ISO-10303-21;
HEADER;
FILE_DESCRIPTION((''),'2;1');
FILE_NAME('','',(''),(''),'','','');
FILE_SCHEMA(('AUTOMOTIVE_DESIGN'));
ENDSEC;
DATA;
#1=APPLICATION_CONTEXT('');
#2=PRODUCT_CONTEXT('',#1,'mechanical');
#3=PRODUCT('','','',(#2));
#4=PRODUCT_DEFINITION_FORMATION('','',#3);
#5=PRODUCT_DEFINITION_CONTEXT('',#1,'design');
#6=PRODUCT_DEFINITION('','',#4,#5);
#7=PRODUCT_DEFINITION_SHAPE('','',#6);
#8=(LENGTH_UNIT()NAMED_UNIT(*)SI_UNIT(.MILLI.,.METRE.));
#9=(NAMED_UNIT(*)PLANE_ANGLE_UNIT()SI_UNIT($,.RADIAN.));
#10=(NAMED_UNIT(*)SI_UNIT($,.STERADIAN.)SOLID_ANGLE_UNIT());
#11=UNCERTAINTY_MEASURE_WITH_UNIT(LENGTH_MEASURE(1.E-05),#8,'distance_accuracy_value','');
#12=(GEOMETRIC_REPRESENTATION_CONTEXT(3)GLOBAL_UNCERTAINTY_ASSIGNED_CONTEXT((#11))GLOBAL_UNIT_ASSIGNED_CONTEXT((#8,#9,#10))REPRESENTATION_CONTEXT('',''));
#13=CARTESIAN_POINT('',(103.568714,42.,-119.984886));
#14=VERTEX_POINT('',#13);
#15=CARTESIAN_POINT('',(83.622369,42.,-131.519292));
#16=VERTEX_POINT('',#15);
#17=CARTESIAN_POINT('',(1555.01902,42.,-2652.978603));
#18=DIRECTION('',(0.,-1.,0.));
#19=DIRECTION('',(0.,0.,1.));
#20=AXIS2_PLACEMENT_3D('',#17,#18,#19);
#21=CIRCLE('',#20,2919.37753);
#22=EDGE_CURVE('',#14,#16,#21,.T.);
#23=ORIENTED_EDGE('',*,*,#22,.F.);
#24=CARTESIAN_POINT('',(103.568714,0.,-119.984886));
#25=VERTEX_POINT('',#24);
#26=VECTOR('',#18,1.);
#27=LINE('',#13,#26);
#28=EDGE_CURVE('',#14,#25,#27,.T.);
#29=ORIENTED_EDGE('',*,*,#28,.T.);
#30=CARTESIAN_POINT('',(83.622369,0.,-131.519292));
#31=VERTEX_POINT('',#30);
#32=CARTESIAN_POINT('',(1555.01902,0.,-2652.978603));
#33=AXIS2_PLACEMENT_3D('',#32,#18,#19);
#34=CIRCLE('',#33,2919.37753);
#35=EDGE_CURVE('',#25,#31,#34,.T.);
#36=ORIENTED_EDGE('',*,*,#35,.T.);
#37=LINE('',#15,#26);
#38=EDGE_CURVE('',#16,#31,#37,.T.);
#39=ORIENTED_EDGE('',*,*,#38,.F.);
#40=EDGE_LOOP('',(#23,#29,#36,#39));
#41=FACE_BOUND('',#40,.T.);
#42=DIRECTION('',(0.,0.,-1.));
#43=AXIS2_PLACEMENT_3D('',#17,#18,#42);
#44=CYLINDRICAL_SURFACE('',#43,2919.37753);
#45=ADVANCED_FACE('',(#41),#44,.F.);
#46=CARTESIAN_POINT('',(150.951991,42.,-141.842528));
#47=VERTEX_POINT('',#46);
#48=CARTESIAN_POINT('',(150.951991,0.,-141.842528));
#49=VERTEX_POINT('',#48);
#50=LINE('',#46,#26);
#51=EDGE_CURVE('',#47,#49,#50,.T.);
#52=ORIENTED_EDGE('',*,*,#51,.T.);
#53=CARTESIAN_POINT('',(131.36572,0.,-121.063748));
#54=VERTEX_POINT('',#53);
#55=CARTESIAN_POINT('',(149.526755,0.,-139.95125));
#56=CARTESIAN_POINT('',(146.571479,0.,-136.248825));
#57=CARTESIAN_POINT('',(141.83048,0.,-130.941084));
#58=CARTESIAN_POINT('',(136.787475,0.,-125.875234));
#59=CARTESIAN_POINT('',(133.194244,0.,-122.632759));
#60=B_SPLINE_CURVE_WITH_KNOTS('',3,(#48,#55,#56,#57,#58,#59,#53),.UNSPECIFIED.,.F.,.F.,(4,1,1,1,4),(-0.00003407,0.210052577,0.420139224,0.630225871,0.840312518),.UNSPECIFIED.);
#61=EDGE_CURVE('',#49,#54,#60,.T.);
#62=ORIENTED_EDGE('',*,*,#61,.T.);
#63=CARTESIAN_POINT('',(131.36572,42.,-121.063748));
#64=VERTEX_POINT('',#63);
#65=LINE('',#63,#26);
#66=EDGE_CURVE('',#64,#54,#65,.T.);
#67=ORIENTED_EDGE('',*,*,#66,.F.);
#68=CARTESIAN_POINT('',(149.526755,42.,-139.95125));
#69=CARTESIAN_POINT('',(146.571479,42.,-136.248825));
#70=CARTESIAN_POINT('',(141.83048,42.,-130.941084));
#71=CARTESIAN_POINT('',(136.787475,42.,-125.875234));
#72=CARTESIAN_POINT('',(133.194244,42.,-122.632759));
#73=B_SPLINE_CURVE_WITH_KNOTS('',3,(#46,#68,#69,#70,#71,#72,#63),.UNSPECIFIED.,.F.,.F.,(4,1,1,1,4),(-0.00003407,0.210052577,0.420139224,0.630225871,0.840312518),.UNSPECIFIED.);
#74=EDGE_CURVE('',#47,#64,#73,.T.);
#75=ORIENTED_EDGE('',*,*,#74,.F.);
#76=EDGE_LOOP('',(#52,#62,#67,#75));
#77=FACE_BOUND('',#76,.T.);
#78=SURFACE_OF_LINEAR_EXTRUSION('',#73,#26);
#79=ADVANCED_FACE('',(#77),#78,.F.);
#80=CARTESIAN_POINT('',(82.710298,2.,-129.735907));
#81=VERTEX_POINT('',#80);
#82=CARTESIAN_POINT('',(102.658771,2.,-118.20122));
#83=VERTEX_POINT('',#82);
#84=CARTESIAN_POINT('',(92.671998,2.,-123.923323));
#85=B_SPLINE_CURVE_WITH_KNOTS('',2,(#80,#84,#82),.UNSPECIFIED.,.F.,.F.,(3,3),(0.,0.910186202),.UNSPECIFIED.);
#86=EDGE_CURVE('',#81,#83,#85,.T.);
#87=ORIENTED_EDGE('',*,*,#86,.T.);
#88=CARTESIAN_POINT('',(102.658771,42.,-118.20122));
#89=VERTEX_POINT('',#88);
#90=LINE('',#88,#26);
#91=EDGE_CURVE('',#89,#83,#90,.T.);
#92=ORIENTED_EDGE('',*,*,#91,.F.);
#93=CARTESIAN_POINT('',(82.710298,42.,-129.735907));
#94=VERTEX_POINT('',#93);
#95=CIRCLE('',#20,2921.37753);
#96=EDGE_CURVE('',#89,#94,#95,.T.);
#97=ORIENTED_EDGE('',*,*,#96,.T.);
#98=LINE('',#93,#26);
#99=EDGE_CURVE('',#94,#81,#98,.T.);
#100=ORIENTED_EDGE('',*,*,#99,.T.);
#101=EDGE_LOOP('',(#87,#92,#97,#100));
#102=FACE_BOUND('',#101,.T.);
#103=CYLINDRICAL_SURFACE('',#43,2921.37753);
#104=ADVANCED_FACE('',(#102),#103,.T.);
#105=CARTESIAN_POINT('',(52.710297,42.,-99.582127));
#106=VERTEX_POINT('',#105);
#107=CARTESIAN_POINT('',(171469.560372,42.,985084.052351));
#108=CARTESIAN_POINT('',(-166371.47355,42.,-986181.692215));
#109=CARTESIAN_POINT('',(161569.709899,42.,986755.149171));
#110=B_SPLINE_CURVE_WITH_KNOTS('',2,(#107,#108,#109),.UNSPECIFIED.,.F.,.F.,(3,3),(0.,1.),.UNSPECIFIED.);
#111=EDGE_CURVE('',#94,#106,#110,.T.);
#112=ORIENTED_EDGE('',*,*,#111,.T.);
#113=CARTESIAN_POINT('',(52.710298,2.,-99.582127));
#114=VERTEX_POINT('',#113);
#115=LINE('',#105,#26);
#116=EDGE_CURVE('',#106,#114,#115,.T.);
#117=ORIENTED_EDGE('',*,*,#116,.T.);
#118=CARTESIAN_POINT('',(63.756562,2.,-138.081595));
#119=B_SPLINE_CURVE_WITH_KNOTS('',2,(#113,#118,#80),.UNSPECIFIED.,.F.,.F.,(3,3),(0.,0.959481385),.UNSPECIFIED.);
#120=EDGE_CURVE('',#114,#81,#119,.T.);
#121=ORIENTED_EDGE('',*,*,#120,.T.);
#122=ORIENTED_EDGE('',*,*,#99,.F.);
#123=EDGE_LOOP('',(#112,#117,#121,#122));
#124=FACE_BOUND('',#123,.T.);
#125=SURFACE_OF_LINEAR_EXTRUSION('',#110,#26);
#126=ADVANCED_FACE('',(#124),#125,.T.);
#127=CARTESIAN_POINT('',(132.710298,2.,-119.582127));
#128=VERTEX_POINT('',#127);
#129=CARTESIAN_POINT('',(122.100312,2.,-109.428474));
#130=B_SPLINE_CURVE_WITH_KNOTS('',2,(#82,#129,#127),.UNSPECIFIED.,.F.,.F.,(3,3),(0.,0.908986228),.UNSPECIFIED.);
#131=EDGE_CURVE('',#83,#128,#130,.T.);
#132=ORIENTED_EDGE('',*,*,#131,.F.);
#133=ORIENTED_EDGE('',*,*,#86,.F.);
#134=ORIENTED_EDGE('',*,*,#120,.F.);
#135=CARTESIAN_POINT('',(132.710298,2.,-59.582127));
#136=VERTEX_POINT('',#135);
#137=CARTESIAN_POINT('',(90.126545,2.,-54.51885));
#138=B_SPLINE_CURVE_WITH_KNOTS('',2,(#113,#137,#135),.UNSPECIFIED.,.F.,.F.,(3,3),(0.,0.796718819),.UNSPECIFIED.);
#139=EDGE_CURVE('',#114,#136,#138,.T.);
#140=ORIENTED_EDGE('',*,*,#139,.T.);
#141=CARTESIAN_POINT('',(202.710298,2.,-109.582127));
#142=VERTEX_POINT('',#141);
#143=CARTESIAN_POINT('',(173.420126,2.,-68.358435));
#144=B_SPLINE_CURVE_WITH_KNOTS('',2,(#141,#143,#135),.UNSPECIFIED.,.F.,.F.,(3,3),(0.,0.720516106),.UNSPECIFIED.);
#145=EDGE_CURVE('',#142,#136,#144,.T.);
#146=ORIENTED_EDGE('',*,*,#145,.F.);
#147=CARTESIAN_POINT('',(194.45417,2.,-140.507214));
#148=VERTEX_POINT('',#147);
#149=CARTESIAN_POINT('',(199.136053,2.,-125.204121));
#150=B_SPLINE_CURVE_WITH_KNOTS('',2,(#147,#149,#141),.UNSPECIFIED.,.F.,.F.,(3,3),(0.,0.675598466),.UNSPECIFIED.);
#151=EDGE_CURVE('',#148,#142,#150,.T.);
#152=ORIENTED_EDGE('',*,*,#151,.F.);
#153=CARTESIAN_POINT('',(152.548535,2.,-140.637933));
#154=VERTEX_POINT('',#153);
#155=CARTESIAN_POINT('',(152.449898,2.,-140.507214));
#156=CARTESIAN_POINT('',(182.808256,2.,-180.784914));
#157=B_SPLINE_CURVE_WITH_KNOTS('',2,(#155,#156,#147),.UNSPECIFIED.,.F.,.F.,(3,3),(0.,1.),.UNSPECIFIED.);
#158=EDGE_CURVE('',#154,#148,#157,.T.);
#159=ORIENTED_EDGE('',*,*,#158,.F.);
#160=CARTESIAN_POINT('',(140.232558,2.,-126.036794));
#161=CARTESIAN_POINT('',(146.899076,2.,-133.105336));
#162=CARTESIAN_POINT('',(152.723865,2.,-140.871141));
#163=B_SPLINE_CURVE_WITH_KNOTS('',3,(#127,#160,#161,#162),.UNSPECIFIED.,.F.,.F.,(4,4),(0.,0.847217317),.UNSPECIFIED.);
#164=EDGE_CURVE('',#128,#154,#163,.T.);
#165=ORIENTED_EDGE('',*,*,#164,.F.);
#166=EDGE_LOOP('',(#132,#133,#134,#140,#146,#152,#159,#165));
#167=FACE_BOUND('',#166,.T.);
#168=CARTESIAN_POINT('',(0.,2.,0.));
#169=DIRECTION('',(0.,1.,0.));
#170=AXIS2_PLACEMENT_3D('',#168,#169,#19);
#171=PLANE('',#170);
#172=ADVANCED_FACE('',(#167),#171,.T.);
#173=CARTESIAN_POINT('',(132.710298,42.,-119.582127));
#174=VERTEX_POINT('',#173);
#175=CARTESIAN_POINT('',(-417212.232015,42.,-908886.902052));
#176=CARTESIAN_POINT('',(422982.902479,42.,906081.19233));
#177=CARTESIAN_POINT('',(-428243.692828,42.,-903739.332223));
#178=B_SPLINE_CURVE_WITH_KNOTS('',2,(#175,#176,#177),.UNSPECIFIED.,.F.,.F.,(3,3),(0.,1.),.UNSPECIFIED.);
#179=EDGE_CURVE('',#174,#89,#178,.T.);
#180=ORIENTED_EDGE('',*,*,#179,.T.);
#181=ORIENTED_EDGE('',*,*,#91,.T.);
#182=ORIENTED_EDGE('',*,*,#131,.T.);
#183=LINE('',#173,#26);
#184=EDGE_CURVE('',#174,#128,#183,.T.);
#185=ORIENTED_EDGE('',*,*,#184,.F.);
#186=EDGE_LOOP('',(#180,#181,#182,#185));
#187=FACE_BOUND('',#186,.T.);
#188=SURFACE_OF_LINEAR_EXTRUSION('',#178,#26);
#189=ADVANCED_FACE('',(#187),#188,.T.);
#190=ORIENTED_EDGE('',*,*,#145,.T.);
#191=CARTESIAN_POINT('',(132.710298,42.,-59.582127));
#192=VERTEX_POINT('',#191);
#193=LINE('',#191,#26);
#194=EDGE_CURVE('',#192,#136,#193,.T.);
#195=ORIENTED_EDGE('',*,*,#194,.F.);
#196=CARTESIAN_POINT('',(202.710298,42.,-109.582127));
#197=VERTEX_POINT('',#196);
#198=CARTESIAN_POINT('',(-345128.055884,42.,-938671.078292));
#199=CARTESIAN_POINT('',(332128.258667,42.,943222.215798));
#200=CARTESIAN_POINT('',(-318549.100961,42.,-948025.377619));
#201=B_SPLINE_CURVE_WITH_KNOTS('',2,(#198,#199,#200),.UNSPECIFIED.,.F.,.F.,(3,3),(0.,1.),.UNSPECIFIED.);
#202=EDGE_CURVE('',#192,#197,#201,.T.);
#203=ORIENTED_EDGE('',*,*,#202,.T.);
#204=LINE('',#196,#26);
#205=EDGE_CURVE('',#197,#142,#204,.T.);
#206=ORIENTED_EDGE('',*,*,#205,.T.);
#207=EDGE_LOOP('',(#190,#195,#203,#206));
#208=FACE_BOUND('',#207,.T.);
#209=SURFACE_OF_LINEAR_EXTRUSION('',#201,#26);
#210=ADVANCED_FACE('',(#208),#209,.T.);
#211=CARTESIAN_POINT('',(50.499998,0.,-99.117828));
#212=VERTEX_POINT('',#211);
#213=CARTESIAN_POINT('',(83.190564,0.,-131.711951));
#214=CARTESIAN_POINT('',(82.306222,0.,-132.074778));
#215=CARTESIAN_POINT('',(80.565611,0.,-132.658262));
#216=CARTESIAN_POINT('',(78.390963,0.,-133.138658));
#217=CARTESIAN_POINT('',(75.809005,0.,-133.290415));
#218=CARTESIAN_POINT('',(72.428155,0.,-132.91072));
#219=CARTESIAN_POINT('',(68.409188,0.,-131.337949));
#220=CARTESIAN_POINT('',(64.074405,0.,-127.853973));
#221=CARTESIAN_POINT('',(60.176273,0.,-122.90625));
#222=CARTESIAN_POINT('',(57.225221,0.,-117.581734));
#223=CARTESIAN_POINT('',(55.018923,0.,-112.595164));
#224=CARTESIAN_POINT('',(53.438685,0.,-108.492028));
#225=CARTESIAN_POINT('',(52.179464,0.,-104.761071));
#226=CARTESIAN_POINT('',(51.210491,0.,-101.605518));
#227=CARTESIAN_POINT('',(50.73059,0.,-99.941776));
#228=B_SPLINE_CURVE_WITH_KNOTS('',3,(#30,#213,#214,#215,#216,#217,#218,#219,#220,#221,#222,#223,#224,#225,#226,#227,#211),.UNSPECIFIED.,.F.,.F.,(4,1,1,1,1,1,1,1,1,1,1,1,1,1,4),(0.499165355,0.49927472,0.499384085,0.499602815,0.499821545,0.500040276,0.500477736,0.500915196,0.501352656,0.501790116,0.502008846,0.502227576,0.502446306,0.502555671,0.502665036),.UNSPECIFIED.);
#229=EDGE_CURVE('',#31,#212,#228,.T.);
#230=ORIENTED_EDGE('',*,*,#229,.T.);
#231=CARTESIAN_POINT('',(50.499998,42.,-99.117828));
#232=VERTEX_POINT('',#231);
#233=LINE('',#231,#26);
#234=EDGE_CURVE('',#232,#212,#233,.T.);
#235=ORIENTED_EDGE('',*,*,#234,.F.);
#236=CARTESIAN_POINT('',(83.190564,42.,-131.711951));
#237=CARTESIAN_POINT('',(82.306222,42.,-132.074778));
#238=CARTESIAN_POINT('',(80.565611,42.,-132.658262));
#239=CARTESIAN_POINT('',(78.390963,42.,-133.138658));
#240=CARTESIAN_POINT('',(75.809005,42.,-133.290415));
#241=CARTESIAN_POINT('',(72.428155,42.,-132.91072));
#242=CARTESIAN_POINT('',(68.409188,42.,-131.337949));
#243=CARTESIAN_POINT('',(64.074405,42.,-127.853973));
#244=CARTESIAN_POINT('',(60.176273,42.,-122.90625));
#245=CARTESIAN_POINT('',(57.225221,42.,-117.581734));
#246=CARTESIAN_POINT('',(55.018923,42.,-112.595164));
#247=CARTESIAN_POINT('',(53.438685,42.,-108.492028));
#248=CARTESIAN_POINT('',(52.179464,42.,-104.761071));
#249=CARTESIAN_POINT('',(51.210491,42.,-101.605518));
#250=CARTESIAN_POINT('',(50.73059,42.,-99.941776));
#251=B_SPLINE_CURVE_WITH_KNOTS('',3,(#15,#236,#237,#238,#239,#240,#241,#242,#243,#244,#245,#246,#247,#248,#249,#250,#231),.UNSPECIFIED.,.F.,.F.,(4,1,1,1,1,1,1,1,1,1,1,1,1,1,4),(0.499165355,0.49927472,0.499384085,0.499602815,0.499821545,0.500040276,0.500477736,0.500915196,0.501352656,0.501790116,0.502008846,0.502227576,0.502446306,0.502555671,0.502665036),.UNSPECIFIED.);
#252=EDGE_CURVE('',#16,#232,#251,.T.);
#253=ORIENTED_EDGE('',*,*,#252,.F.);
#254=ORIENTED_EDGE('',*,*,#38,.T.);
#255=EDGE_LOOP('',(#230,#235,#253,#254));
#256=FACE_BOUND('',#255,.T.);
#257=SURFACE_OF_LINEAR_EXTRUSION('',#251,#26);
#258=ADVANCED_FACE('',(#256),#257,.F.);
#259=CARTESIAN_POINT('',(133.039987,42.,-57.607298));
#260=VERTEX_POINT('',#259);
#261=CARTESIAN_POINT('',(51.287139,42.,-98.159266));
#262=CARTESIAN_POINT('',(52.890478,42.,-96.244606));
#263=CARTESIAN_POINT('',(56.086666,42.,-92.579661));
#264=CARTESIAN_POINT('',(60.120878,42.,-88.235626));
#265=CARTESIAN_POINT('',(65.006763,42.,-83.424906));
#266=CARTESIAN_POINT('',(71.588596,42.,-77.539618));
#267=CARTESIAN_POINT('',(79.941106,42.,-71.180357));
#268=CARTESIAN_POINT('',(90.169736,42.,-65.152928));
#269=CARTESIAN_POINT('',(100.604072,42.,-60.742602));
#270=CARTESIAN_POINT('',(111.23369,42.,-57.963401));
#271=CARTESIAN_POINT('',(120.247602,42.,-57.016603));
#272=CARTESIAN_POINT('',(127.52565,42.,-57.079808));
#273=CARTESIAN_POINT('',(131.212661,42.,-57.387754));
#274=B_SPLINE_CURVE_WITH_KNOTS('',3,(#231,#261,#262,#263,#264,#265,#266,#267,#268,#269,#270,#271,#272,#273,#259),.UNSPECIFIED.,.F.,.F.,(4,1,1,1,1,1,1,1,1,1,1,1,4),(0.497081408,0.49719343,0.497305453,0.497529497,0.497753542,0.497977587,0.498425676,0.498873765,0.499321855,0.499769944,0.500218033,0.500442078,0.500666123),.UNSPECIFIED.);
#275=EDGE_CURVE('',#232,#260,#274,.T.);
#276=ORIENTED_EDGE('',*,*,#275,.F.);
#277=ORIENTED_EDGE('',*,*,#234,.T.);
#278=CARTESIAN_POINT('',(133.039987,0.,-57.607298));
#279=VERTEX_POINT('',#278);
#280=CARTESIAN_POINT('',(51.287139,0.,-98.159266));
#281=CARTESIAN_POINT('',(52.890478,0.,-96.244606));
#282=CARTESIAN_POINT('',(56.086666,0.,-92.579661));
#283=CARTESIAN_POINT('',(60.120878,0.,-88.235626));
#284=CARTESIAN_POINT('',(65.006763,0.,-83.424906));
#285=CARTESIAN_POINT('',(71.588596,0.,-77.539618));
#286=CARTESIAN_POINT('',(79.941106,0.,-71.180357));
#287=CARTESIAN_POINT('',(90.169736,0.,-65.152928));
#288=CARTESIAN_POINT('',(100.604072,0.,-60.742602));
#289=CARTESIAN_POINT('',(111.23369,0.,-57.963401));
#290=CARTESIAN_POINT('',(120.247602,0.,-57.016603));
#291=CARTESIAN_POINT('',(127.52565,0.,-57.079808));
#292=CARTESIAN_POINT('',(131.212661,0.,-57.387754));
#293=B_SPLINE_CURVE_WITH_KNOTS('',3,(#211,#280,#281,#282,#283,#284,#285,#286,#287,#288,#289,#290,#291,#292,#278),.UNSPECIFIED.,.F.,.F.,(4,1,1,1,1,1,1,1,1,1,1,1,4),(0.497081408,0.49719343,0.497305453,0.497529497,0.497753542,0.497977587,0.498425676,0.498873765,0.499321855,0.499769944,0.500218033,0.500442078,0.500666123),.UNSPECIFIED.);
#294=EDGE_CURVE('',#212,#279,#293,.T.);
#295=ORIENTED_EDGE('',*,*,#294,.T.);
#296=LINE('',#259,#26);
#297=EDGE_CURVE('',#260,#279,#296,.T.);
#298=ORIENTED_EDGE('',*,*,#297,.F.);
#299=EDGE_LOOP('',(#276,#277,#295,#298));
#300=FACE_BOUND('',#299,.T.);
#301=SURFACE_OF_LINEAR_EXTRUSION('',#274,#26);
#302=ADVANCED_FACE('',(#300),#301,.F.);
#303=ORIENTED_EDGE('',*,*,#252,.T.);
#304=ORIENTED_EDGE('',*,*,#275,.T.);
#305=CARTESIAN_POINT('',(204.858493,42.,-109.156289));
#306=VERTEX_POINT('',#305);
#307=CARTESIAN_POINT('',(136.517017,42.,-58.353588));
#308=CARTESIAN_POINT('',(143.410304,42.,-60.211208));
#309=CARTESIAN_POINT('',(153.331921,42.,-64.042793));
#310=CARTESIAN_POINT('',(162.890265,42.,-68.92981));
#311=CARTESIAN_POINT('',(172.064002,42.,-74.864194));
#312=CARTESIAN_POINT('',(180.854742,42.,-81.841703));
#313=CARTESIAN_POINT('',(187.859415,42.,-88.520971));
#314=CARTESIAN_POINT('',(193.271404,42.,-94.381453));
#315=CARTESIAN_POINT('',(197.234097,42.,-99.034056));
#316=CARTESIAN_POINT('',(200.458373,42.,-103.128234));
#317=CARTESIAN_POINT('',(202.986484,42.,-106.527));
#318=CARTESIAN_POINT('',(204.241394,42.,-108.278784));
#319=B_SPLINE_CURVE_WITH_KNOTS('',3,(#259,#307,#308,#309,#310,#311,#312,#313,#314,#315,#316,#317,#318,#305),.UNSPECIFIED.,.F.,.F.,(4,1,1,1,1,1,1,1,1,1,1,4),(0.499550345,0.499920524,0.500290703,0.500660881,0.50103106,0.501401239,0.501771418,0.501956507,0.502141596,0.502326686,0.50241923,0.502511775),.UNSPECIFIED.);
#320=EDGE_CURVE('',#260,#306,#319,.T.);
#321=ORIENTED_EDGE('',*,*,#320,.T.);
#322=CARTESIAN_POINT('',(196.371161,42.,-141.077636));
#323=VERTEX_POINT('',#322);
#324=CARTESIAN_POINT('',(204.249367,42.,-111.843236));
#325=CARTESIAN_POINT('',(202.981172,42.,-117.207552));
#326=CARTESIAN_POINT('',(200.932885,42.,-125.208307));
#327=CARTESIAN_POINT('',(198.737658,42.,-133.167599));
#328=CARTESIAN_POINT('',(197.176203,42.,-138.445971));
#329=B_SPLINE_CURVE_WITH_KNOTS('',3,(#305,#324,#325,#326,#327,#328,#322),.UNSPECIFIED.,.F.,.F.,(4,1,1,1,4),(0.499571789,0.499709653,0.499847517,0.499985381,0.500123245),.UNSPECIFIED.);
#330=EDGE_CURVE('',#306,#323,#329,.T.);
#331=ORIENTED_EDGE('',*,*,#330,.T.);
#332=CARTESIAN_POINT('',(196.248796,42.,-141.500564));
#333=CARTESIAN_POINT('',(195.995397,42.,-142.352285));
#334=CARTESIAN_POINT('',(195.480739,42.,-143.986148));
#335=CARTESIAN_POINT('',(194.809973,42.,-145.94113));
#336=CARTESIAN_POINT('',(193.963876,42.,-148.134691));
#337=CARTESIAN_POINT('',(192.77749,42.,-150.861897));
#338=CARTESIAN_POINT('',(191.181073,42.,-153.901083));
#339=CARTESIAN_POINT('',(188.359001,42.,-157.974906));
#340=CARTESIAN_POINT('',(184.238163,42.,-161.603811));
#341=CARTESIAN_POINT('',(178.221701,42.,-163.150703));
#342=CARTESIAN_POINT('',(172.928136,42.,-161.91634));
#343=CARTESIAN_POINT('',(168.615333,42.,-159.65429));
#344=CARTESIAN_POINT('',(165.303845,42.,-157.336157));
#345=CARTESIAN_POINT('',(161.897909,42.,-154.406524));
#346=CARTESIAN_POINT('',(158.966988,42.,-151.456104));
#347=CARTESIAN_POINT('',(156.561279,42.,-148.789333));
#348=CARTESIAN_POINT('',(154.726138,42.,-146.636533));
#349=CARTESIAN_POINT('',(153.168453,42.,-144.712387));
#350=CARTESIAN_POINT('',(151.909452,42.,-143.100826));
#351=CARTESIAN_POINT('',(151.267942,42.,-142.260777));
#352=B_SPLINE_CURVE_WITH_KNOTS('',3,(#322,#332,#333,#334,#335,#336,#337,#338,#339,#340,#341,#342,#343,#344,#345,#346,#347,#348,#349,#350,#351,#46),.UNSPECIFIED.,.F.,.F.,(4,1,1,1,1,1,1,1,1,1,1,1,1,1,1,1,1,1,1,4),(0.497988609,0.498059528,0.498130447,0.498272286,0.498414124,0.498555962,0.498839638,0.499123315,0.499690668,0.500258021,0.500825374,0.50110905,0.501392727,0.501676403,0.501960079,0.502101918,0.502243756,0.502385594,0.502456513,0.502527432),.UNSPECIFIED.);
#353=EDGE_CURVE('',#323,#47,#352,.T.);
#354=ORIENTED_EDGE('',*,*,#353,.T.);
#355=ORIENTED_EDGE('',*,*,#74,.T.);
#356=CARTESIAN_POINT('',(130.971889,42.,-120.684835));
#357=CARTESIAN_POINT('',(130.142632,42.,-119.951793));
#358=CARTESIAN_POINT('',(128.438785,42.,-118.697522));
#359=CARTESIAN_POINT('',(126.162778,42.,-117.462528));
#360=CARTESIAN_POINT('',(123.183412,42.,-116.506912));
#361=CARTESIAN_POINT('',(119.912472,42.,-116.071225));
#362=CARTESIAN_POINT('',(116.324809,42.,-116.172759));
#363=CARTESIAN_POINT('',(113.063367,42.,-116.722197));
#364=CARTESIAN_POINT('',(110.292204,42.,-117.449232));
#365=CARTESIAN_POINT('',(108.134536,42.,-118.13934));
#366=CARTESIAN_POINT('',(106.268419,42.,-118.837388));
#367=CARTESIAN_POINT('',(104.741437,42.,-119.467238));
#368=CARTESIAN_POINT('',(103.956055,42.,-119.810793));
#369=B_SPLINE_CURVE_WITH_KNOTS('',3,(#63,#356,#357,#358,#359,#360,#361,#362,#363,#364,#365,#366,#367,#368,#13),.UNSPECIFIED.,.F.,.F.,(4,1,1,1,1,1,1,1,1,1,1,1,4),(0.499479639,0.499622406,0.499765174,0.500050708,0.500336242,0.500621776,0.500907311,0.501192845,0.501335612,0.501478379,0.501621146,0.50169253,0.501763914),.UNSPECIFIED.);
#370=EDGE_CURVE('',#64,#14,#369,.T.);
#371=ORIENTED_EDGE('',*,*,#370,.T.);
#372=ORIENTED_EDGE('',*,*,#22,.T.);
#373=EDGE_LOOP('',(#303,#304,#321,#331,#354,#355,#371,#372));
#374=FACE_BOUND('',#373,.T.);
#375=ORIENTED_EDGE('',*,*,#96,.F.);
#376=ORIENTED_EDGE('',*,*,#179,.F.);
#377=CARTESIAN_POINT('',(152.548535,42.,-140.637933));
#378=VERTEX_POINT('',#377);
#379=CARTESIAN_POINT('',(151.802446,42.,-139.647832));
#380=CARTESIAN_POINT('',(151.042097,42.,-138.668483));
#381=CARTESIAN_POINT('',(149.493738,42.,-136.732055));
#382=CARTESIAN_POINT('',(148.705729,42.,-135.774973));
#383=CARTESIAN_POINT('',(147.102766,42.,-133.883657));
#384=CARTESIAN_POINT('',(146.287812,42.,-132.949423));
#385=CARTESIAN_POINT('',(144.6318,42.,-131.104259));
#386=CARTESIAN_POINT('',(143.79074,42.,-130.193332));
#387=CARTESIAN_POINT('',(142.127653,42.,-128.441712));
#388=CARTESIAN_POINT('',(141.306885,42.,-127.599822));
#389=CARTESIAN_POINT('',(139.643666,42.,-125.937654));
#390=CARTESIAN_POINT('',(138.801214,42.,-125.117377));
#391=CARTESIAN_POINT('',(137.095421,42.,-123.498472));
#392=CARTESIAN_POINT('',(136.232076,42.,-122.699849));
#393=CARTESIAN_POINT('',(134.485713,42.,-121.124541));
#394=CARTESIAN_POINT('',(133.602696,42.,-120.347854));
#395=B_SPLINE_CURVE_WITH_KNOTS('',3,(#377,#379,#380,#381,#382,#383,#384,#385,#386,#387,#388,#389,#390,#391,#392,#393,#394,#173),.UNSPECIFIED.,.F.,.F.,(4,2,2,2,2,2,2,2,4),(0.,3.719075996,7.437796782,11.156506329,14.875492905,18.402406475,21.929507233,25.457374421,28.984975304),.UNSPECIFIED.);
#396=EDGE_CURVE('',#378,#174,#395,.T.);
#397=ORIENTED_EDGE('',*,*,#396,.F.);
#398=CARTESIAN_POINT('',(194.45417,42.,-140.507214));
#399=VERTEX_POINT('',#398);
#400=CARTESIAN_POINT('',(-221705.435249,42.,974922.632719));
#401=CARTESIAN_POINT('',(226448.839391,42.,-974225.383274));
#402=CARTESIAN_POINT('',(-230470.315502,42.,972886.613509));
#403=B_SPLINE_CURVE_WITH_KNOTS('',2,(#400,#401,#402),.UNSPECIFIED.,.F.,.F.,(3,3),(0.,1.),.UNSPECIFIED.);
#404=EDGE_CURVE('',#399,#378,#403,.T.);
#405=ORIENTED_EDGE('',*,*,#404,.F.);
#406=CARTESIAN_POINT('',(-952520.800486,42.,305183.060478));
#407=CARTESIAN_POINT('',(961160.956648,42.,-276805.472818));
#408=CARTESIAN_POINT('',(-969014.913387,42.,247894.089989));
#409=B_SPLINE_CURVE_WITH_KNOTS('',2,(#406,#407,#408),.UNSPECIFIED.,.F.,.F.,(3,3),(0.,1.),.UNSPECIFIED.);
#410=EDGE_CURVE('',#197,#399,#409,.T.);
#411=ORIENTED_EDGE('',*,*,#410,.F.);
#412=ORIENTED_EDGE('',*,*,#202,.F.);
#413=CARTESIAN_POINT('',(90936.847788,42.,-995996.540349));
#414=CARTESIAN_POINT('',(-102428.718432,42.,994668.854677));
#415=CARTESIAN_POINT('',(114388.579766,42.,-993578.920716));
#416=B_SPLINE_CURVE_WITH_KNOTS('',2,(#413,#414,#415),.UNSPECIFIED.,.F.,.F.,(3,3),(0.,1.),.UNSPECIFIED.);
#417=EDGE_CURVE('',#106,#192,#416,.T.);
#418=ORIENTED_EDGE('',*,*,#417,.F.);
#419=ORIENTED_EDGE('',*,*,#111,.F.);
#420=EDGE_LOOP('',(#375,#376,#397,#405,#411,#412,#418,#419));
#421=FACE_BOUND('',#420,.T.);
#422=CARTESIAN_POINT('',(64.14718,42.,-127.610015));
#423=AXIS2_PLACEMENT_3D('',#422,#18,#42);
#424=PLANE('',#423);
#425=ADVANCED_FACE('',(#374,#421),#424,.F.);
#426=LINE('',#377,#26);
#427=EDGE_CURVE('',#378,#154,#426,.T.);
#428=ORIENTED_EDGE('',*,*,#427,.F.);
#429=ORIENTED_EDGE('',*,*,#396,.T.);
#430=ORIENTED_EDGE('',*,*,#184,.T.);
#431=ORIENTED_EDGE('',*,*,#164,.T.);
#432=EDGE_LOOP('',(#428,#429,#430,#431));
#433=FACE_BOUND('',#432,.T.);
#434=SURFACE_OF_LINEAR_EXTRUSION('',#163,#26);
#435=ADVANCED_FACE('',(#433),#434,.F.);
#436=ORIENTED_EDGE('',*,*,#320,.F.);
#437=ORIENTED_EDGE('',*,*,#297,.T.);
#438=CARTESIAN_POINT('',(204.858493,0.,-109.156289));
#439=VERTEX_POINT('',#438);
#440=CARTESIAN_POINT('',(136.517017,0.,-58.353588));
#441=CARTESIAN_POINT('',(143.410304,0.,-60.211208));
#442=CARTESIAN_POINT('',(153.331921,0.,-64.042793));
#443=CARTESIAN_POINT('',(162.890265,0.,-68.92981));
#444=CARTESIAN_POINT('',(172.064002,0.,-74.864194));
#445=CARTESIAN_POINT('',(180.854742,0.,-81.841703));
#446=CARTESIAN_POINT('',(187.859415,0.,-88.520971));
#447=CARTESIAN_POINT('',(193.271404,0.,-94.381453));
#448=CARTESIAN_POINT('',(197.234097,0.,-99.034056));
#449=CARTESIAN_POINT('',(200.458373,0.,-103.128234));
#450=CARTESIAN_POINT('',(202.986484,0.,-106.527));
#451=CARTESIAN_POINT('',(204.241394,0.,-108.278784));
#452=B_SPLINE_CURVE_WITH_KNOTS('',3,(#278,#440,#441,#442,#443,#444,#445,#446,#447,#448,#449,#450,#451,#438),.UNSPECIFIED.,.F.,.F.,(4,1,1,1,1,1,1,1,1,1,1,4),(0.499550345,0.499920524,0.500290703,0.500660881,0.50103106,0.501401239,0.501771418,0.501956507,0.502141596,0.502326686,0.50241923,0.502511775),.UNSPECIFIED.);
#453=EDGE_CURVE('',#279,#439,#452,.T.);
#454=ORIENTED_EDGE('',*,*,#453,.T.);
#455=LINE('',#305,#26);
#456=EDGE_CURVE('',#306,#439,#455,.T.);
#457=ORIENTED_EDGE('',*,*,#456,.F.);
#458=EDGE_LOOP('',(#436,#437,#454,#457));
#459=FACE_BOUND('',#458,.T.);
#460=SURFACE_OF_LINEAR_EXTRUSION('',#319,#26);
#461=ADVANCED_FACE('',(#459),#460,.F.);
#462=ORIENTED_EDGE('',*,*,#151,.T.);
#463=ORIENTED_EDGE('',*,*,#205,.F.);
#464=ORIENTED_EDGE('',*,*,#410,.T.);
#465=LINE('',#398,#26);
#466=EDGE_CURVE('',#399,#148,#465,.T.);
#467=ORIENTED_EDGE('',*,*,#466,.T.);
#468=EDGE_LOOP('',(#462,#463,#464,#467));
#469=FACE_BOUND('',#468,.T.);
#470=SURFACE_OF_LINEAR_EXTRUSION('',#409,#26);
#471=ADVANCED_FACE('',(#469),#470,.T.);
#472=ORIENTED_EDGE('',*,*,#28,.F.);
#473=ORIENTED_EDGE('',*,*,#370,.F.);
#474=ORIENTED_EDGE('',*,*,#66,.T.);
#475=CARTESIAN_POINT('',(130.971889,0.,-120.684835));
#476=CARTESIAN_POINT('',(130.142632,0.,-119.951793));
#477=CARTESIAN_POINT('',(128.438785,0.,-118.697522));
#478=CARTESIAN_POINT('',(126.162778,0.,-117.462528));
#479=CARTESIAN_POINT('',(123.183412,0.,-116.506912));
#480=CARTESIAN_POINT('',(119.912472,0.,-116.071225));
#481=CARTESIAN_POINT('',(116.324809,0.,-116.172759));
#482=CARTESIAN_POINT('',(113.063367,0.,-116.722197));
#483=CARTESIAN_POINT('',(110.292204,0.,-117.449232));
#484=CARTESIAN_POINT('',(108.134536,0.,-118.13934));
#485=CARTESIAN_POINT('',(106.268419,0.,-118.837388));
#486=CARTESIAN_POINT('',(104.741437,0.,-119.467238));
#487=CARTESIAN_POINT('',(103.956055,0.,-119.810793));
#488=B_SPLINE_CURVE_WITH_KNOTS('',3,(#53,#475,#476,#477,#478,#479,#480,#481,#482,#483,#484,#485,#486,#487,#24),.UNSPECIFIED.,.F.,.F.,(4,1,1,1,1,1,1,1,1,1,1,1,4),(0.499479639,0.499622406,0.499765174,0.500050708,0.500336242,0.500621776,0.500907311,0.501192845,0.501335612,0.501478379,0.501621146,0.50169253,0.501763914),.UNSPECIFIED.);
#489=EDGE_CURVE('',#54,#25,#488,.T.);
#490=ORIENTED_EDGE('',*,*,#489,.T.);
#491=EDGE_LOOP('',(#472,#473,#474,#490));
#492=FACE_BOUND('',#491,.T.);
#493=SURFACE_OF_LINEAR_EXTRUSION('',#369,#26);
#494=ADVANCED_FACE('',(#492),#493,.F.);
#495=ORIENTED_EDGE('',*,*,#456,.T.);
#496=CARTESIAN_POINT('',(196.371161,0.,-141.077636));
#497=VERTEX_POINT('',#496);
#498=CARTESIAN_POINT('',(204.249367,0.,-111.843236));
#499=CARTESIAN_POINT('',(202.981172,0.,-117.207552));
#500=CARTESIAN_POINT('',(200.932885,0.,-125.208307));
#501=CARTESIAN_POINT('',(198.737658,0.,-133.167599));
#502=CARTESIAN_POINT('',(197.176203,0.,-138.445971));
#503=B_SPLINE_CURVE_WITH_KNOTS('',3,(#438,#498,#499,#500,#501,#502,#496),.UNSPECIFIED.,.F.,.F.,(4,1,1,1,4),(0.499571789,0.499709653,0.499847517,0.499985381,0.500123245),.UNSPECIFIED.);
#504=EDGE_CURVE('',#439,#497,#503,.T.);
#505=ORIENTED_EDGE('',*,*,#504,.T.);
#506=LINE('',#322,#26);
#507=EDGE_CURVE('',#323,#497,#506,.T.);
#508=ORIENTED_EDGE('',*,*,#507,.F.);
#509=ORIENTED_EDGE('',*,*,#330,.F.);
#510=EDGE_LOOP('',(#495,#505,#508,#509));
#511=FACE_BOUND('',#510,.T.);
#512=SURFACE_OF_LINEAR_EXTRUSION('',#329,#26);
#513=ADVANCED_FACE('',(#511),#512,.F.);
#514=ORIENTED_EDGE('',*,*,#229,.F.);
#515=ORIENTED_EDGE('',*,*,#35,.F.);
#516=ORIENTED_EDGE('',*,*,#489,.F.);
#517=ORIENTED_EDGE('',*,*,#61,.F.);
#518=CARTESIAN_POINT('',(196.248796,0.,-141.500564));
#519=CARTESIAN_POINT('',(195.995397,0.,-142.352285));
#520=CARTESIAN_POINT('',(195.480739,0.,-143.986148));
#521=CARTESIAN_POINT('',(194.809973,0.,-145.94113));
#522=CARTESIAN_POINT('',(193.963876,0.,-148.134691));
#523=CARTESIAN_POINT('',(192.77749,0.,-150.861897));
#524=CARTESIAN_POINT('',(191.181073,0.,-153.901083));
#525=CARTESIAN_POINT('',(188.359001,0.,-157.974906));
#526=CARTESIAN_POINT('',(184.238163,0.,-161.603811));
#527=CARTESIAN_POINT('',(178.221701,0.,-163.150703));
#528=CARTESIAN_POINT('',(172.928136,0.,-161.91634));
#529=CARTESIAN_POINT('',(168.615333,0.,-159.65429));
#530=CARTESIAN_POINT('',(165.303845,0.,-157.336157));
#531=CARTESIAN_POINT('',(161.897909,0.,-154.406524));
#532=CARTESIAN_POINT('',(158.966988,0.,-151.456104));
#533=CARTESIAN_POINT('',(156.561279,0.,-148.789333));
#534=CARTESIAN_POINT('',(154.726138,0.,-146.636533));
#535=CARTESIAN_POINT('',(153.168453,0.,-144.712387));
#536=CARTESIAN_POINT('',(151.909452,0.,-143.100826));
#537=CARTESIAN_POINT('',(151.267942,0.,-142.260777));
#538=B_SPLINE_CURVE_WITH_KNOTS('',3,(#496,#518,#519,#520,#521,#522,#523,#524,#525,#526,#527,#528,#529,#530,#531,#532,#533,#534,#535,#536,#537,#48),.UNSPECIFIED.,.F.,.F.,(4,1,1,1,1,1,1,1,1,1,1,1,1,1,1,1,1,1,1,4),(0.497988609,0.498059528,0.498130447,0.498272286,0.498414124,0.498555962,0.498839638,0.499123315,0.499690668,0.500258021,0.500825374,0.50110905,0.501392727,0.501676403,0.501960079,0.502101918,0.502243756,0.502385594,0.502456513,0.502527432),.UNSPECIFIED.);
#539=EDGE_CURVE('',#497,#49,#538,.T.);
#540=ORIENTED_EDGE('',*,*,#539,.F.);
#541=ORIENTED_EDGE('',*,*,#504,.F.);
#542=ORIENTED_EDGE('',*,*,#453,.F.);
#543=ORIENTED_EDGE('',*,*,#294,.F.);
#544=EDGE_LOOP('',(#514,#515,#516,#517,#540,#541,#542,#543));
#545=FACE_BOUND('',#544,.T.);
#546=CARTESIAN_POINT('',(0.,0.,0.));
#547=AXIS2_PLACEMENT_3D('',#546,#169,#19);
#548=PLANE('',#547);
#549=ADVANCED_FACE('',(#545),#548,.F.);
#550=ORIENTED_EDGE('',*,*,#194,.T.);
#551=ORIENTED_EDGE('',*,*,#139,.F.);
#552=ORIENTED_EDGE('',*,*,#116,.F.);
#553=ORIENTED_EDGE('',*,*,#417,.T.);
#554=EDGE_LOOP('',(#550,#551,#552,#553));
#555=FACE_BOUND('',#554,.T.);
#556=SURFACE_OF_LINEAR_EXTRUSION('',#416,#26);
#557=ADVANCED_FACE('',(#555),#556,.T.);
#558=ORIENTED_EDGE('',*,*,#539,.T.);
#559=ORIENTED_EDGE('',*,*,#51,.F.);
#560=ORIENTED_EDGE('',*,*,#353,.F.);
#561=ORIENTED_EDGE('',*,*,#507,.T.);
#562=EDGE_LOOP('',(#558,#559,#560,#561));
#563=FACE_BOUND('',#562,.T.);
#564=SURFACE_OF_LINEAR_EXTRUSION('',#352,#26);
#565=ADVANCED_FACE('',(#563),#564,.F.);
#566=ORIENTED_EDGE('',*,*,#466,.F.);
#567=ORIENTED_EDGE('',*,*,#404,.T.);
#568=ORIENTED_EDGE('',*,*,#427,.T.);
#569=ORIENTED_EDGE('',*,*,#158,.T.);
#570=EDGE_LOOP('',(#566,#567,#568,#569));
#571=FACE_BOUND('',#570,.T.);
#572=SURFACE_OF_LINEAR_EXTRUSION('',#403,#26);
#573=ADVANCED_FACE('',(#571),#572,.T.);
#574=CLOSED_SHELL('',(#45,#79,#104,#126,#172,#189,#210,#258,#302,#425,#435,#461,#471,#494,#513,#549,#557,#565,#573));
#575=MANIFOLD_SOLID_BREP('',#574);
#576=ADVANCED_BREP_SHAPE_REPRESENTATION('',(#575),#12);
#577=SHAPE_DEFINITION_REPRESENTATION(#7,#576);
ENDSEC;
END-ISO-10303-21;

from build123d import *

# Parameters (mm, degrees)
SALIENTE_EXTRUIR1_DEPTH = 2
SALIENTE_EXTRUIR2_START = -2
SALIENTE_EXTRUIR2_DEPTH = 42


with BuildPart() as part:
    # Croquis4 → Saliente-Extruir1 (new body)
    with BuildSketch(Plane(origin=(0, 0, 0), x_dir=(1, 0, 0), z_dir=(0, 1, 0))):
        with BuildLine():
            add(Edge.make_bspline(
                [(52.710297529, 99.582127302), (63.756561517, 138.081595195), (82.710297529, 129.735907435)],
                knots=[0, 0, 0, 0.959481385, 0.959481385, 0.959481385], degree=2))
            add(Edge.make_bspline(
                [(52.710297529, 99.582127302), (90.126545005, 54.518849823), (132.710297529, 59.582127302)],
                knots=[0, 0, 0, 0.796718819, 0.796718819, 0.796718819], degree=2))
            add(Edge.make_bspline(
                [(202.710297529, 109.582127302), (173.420126191, 68.358434503), (132.710297529, 59.582127302)],
                knots=[0, 0, 0, 0.720516106, 0.720516106, 0.720516106], degree=2))
            add(Edge.make_bspline(
                [(194.454170212, 140.507214192), (199.136053193, 125.204121307), (202.710297529, 109.582127302)],
                knots=[0, 0, 0, 0.675598466, 0.675598466, 0.675598466], degree=2))
            add(Edge.make_bspline(
                [(152.449897532, 140.507214192), (182.808256429, 180.784913915), (194.454170212, 140.507214192)],
                knots=[0, 0, 0, 1, 1, 1], degree=2))
            add(Edge.make_bspline(
                [(132.710297529, 119.582127302), (140.11488779, 125.935824124), (146.690299112, 132.884341967), (152.449897532, 140.507214192)],
                knots=[0, 0, 0, 0, 0.833964402, 0.833964402, 0.833964402, 0.833964402], degree=3))
            add(Edge.make_bspline(
                [(102.65877087, 118.201219927), (122.100312055, 109.428474087), (132.710297529, 119.582127302)],
                knots=[0, 0, 0, 0.908986228, 0.908986228, 0.908986228], degree=2))
            add(Edge.make_bspline(
                [(82.710297529, 129.735907435), (92.671997726, 123.923322823), (102.65877087, 118.201219927)],
                knots=[0, 0, 0, 0.910186202, 0.910186202, 0.910186202], degree=2))
        make_face()
    extrude(amount=SALIENTE_EXTRUIR1_DEPTH)


with BuildPart() as saliente_extruir2_tool:
    # Croquis19 → Saliente-Extruir2 (new body)
    with BuildSketch(Plane(origin=(0, 2, 0), x_dir=(1, 0, 0), z_dir=(0, 1, 0)).offset(SALIENTE_EXTRUIR2_START)):
        with BuildLine():
            ThreePointArc((83.62236865, 131.519291558), (93.584161606, 125.732410099), (103.568713537, 119.984885532))
            add(Edge.make_bspline(
                [(131.365719965, 121.063748092), (130.971888683, 120.684835363), (130.142632133, 119.9517928), (128.438784912, 118.697522102), (126.162778494, 117.462528487), (123.183412129, 116.506911998), (119.912471769, 116.071224684), (116.324809268, 116.172759218), (113.063366868, 116.72219656), (110.29220395, 117.449231612), (108.134536322, 118.139339847), (106.268418782, 118.837388441), (104.741437099, 119.467238276), (103.95605498, 119.810793101), (103.568713537, 119.984885532)],
                knots=[0.499479639, 0.499479639, 0.499479639, 0.499479639, 0.499622406, 0.499765174, 0.500050708, 0.500336242, 0.500621776, 0.500907311, 0.501192845, 0.501335612, 0.501478379, 0.501621146, 0.50169253, 0.501763914, 0.501763914, 0.501763914, 0.501763914], degree=3))
            add(Edge.make_bspline(
                [(150.95199089, 141.842528057), (149.526755213, 139.951249583), (146.571479335, 136.248825133), (141.830479534, 130.941084133), (136.787475181, 125.875234297), (133.19424387, 122.632759491), (131.365719965, 121.063748092)],
                knots=[-3.407e-05, -3.407e-05, -3.407e-05, -3.407e-05, 0.210052577, 0.420139224, 0.630225871, 0.840312518, 0.840312518, 0.840312518, 0.840312518], degree=3))
            add(Edge.make_bspline(
                [(196.371161118, 141.077635904), (196.248795755, 141.500563841), (195.995397252, 142.352285229), (195.48073896, 143.986147771), (194.809972536, 145.941130105), (193.963876481, 148.134691236), (192.777490455, 150.861896983), (191.18107336, 153.901083064), (188.359000505, 157.974905621), (184.238162706, 161.603811097), (178.221700824, 163.150703065), (172.92813627, 161.916340062), (168.615333395, 159.654290079), (165.303845353, 157.336157381), (161.897909374, 154.406523973), (158.966988471, 151.456103514), (156.561279242, 148.789333407), (154.72613836, 146.636533397), (153.168453014, 144.712387311), (151.909452091, 143.100825644), (151.267942364, 142.260777118), (150.95199089, 141.842528057)],
                knots=[0.497988609, 0.497988609, 0.497988609, 0.497988609, 0.498059528, 0.498130447, 0.498272286, 0.498414124, 0.498555962, 0.498839638, 0.499123315, 0.499690668, 0.500258021, 0.500825374, 0.50110905, 0.501392727, 0.501676403, 0.501960079, 0.502101918, 0.502243756, 0.502385594, 0.502456513, 0.502527432, 0.502527432, 0.502527432, 0.502527432], degree=3))
            add(Edge.make_bspline(
                [(204.858492638, 109.156288537), (204.249367291, 111.843236182), (202.981172007, 117.207552496), (200.93288469, 125.208306826), (198.73765845, 133.167598608), (197.176202956, 138.445971282), (196.371161118, 141.077635904)],
                knots=[0.499571789, 0.499571789, 0.499571789, 0.499571789, 0.499709653, 0.499847517, 0.499985381, 0.500123245, 0.500123245, 0.500123245, 0.500123245], degree=3))
            add(Edge.make_bspline(
                [(133.039987072, 57.607298121), (136.517017027, 58.353588239), (143.410304061, 60.211208361), (153.331921439, 64.042793156), (162.890265106, 68.929810065), (172.064001952, 74.864194253), (180.854741648, 81.841702982), (187.85941484, 88.520970761), (193.271403672, 94.381452844), (197.234097167, 99.034056041), (200.458372672, 103.128234116), (202.986483638, 106.526999655), (204.241393684, 108.278784185), (204.858492638, 109.156288537)],
                knots=[0.499550345, 0.499550345, 0.499550345, 0.499550345, 0.499920524, 0.500290703, 0.500660881, 0.50103106, 0.501401239, 0.501771418, 0.501956507, 0.502141596, 0.502326686, 0.50241923, 0.502511775, 0.502511775, 0.502511775, 0.502511775], degree=3))
            add(Edge.make_bspline(
                [(50.499998363, 99.117827857), (51.28713851, 98.159265707), (52.890478228, 96.244606437), (56.086666196, 92.579661214), (60.120878243, 88.23562625), (65.006762747, 83.424905696), (71.588596042, 77.539618496), (79.941105501, 71.180357421), (90.169736046, 65.152928032), (100.604072147, 60.742602073), (111.233689738, 57.963400667), (120.24760203, 57.016603306), (127.525650082, 57.079807576), (131.212661015, 57.387753526), (133.039987072, 57.607298121)],
                knots=[0.497081408, 0.497081408, 0.497081408, 0.497081408, 0.49719343, 0.497305453, 0.497529497, 0.497753542, 0.497977587, 0.498425676, 0.498873765, 0.499321855, 0.499769944, 0.500218033, 0.500442078, 0.500666123, 0.500666123, 0.500666123, 0.500666123], degree=3))
            add(Edge.make_bspline(
                [(83.62236865, 131.519291558), (83.190564237, 131.711951172), (82.306221846, 132.074777828), (80.565610632, 132.658261641), (78.390963008, 133.138657799), (75.809004868, 133.290414791), (72.428155416, 132.910719977), (68.40918787, 131.337949061), (64.074405033, 127.853972923), (60.176273009, 122.906250357), (57.22522126, 117.581734073), (55.018923032, 112.59516445), (53.438684901, 108.492028222), (52.179464056, 104.761070862), (51.210491315, 101.605518316), (50.730590106, 99.941775987), (50.499998363, 99.117827857)],
                knots=[0.499165355, 0.499165355, 0.499165355, 0.499165355, 0.49927472, 0.499384085, 0.499602815, 0.499821545, 0.500040276, 0.500477736, 0.500915196, 0.501352656, 0.501790116, 0.502008846, 0.502227576, 0.502446306, 0.502555671, 0.502665036, 0.502665036, 0.502665036, 0.502665036], degree=3))
        make_face()
        with BuildLine():
            ThreePointArc((82.71029754, 129.73590743), (92.673161251, 123.948894915), (102.658770868, 118.201219928))
            add(Edge.make_bspline(
                [(132.710297529, 119.582127302), (122.100312054, 109.428474087), (102.658770868, 118.201219928)],
                knots=[0, 0, 0, 1, 1, 1], degree=2))
            add(Edge.make_bspline(
                [(152.54853475, 140.637933075), (146.765405271, 132.963757867), (140.157191664, 125.972124037), (132.710297529, 119.582127302)],
                knots=[0, 0, 0, 0, 0.838729004, 0.838729004, 0.838729004, 0.838729004], degree=3))
            add(Edge.make_bspline(
                [(194.454170212, 140.507214192), (182.827185257, 180.719448068), (152.54853475, 140.637933075)],
                knots=[0, 0, 0, 1, 1, 1], degree=2))
            add(Edge.make_bspline(
                [(202.710297591, 109.58212739), (199.136053222, 125.204121351), (194.454170212, 140.507214192)],
                knots=[0, 0, 0, 1, 1, 1], degree=2))
            add(Edge.make_bspline(
                [(132.710297645, 59.582127316), (173.420126277, 68.358434565), (202.710297591, 109.58212739)],
                knots=[0, 0, 0, 1, 1, 1], degree=2))
            add(Edge.make_bspline(
                [(52.710297498, 99.582127194), (90.126545043, 54.518849734), (132.710297645, 59.582127316)],
                knots=[0, 0, 0, 1, 1, 1], degree=2))
            add(Edge.make_bspline(
                [(82.71029754, 129.73590743), (63.756561494, 138.081595218), (52.710297498, 99.582127194)],
                knots=[0, 0, 0, 1, 1, 1], degree=2))
        make_face(mode=Mode.SUBTRACT)
    extrude(amount=SALIENTE_EXTRUIR2_DEPTH)


with BuildPart() as part_1:
    add(part.part)


with BuildPart() as part_2:
    # Saliente-Extruir2: joined with saliente_extruir2_tool
    add(part_1.part.fuse(saliente_extruir2_tool.part, tol=0.00001))


solid = part_2.part
